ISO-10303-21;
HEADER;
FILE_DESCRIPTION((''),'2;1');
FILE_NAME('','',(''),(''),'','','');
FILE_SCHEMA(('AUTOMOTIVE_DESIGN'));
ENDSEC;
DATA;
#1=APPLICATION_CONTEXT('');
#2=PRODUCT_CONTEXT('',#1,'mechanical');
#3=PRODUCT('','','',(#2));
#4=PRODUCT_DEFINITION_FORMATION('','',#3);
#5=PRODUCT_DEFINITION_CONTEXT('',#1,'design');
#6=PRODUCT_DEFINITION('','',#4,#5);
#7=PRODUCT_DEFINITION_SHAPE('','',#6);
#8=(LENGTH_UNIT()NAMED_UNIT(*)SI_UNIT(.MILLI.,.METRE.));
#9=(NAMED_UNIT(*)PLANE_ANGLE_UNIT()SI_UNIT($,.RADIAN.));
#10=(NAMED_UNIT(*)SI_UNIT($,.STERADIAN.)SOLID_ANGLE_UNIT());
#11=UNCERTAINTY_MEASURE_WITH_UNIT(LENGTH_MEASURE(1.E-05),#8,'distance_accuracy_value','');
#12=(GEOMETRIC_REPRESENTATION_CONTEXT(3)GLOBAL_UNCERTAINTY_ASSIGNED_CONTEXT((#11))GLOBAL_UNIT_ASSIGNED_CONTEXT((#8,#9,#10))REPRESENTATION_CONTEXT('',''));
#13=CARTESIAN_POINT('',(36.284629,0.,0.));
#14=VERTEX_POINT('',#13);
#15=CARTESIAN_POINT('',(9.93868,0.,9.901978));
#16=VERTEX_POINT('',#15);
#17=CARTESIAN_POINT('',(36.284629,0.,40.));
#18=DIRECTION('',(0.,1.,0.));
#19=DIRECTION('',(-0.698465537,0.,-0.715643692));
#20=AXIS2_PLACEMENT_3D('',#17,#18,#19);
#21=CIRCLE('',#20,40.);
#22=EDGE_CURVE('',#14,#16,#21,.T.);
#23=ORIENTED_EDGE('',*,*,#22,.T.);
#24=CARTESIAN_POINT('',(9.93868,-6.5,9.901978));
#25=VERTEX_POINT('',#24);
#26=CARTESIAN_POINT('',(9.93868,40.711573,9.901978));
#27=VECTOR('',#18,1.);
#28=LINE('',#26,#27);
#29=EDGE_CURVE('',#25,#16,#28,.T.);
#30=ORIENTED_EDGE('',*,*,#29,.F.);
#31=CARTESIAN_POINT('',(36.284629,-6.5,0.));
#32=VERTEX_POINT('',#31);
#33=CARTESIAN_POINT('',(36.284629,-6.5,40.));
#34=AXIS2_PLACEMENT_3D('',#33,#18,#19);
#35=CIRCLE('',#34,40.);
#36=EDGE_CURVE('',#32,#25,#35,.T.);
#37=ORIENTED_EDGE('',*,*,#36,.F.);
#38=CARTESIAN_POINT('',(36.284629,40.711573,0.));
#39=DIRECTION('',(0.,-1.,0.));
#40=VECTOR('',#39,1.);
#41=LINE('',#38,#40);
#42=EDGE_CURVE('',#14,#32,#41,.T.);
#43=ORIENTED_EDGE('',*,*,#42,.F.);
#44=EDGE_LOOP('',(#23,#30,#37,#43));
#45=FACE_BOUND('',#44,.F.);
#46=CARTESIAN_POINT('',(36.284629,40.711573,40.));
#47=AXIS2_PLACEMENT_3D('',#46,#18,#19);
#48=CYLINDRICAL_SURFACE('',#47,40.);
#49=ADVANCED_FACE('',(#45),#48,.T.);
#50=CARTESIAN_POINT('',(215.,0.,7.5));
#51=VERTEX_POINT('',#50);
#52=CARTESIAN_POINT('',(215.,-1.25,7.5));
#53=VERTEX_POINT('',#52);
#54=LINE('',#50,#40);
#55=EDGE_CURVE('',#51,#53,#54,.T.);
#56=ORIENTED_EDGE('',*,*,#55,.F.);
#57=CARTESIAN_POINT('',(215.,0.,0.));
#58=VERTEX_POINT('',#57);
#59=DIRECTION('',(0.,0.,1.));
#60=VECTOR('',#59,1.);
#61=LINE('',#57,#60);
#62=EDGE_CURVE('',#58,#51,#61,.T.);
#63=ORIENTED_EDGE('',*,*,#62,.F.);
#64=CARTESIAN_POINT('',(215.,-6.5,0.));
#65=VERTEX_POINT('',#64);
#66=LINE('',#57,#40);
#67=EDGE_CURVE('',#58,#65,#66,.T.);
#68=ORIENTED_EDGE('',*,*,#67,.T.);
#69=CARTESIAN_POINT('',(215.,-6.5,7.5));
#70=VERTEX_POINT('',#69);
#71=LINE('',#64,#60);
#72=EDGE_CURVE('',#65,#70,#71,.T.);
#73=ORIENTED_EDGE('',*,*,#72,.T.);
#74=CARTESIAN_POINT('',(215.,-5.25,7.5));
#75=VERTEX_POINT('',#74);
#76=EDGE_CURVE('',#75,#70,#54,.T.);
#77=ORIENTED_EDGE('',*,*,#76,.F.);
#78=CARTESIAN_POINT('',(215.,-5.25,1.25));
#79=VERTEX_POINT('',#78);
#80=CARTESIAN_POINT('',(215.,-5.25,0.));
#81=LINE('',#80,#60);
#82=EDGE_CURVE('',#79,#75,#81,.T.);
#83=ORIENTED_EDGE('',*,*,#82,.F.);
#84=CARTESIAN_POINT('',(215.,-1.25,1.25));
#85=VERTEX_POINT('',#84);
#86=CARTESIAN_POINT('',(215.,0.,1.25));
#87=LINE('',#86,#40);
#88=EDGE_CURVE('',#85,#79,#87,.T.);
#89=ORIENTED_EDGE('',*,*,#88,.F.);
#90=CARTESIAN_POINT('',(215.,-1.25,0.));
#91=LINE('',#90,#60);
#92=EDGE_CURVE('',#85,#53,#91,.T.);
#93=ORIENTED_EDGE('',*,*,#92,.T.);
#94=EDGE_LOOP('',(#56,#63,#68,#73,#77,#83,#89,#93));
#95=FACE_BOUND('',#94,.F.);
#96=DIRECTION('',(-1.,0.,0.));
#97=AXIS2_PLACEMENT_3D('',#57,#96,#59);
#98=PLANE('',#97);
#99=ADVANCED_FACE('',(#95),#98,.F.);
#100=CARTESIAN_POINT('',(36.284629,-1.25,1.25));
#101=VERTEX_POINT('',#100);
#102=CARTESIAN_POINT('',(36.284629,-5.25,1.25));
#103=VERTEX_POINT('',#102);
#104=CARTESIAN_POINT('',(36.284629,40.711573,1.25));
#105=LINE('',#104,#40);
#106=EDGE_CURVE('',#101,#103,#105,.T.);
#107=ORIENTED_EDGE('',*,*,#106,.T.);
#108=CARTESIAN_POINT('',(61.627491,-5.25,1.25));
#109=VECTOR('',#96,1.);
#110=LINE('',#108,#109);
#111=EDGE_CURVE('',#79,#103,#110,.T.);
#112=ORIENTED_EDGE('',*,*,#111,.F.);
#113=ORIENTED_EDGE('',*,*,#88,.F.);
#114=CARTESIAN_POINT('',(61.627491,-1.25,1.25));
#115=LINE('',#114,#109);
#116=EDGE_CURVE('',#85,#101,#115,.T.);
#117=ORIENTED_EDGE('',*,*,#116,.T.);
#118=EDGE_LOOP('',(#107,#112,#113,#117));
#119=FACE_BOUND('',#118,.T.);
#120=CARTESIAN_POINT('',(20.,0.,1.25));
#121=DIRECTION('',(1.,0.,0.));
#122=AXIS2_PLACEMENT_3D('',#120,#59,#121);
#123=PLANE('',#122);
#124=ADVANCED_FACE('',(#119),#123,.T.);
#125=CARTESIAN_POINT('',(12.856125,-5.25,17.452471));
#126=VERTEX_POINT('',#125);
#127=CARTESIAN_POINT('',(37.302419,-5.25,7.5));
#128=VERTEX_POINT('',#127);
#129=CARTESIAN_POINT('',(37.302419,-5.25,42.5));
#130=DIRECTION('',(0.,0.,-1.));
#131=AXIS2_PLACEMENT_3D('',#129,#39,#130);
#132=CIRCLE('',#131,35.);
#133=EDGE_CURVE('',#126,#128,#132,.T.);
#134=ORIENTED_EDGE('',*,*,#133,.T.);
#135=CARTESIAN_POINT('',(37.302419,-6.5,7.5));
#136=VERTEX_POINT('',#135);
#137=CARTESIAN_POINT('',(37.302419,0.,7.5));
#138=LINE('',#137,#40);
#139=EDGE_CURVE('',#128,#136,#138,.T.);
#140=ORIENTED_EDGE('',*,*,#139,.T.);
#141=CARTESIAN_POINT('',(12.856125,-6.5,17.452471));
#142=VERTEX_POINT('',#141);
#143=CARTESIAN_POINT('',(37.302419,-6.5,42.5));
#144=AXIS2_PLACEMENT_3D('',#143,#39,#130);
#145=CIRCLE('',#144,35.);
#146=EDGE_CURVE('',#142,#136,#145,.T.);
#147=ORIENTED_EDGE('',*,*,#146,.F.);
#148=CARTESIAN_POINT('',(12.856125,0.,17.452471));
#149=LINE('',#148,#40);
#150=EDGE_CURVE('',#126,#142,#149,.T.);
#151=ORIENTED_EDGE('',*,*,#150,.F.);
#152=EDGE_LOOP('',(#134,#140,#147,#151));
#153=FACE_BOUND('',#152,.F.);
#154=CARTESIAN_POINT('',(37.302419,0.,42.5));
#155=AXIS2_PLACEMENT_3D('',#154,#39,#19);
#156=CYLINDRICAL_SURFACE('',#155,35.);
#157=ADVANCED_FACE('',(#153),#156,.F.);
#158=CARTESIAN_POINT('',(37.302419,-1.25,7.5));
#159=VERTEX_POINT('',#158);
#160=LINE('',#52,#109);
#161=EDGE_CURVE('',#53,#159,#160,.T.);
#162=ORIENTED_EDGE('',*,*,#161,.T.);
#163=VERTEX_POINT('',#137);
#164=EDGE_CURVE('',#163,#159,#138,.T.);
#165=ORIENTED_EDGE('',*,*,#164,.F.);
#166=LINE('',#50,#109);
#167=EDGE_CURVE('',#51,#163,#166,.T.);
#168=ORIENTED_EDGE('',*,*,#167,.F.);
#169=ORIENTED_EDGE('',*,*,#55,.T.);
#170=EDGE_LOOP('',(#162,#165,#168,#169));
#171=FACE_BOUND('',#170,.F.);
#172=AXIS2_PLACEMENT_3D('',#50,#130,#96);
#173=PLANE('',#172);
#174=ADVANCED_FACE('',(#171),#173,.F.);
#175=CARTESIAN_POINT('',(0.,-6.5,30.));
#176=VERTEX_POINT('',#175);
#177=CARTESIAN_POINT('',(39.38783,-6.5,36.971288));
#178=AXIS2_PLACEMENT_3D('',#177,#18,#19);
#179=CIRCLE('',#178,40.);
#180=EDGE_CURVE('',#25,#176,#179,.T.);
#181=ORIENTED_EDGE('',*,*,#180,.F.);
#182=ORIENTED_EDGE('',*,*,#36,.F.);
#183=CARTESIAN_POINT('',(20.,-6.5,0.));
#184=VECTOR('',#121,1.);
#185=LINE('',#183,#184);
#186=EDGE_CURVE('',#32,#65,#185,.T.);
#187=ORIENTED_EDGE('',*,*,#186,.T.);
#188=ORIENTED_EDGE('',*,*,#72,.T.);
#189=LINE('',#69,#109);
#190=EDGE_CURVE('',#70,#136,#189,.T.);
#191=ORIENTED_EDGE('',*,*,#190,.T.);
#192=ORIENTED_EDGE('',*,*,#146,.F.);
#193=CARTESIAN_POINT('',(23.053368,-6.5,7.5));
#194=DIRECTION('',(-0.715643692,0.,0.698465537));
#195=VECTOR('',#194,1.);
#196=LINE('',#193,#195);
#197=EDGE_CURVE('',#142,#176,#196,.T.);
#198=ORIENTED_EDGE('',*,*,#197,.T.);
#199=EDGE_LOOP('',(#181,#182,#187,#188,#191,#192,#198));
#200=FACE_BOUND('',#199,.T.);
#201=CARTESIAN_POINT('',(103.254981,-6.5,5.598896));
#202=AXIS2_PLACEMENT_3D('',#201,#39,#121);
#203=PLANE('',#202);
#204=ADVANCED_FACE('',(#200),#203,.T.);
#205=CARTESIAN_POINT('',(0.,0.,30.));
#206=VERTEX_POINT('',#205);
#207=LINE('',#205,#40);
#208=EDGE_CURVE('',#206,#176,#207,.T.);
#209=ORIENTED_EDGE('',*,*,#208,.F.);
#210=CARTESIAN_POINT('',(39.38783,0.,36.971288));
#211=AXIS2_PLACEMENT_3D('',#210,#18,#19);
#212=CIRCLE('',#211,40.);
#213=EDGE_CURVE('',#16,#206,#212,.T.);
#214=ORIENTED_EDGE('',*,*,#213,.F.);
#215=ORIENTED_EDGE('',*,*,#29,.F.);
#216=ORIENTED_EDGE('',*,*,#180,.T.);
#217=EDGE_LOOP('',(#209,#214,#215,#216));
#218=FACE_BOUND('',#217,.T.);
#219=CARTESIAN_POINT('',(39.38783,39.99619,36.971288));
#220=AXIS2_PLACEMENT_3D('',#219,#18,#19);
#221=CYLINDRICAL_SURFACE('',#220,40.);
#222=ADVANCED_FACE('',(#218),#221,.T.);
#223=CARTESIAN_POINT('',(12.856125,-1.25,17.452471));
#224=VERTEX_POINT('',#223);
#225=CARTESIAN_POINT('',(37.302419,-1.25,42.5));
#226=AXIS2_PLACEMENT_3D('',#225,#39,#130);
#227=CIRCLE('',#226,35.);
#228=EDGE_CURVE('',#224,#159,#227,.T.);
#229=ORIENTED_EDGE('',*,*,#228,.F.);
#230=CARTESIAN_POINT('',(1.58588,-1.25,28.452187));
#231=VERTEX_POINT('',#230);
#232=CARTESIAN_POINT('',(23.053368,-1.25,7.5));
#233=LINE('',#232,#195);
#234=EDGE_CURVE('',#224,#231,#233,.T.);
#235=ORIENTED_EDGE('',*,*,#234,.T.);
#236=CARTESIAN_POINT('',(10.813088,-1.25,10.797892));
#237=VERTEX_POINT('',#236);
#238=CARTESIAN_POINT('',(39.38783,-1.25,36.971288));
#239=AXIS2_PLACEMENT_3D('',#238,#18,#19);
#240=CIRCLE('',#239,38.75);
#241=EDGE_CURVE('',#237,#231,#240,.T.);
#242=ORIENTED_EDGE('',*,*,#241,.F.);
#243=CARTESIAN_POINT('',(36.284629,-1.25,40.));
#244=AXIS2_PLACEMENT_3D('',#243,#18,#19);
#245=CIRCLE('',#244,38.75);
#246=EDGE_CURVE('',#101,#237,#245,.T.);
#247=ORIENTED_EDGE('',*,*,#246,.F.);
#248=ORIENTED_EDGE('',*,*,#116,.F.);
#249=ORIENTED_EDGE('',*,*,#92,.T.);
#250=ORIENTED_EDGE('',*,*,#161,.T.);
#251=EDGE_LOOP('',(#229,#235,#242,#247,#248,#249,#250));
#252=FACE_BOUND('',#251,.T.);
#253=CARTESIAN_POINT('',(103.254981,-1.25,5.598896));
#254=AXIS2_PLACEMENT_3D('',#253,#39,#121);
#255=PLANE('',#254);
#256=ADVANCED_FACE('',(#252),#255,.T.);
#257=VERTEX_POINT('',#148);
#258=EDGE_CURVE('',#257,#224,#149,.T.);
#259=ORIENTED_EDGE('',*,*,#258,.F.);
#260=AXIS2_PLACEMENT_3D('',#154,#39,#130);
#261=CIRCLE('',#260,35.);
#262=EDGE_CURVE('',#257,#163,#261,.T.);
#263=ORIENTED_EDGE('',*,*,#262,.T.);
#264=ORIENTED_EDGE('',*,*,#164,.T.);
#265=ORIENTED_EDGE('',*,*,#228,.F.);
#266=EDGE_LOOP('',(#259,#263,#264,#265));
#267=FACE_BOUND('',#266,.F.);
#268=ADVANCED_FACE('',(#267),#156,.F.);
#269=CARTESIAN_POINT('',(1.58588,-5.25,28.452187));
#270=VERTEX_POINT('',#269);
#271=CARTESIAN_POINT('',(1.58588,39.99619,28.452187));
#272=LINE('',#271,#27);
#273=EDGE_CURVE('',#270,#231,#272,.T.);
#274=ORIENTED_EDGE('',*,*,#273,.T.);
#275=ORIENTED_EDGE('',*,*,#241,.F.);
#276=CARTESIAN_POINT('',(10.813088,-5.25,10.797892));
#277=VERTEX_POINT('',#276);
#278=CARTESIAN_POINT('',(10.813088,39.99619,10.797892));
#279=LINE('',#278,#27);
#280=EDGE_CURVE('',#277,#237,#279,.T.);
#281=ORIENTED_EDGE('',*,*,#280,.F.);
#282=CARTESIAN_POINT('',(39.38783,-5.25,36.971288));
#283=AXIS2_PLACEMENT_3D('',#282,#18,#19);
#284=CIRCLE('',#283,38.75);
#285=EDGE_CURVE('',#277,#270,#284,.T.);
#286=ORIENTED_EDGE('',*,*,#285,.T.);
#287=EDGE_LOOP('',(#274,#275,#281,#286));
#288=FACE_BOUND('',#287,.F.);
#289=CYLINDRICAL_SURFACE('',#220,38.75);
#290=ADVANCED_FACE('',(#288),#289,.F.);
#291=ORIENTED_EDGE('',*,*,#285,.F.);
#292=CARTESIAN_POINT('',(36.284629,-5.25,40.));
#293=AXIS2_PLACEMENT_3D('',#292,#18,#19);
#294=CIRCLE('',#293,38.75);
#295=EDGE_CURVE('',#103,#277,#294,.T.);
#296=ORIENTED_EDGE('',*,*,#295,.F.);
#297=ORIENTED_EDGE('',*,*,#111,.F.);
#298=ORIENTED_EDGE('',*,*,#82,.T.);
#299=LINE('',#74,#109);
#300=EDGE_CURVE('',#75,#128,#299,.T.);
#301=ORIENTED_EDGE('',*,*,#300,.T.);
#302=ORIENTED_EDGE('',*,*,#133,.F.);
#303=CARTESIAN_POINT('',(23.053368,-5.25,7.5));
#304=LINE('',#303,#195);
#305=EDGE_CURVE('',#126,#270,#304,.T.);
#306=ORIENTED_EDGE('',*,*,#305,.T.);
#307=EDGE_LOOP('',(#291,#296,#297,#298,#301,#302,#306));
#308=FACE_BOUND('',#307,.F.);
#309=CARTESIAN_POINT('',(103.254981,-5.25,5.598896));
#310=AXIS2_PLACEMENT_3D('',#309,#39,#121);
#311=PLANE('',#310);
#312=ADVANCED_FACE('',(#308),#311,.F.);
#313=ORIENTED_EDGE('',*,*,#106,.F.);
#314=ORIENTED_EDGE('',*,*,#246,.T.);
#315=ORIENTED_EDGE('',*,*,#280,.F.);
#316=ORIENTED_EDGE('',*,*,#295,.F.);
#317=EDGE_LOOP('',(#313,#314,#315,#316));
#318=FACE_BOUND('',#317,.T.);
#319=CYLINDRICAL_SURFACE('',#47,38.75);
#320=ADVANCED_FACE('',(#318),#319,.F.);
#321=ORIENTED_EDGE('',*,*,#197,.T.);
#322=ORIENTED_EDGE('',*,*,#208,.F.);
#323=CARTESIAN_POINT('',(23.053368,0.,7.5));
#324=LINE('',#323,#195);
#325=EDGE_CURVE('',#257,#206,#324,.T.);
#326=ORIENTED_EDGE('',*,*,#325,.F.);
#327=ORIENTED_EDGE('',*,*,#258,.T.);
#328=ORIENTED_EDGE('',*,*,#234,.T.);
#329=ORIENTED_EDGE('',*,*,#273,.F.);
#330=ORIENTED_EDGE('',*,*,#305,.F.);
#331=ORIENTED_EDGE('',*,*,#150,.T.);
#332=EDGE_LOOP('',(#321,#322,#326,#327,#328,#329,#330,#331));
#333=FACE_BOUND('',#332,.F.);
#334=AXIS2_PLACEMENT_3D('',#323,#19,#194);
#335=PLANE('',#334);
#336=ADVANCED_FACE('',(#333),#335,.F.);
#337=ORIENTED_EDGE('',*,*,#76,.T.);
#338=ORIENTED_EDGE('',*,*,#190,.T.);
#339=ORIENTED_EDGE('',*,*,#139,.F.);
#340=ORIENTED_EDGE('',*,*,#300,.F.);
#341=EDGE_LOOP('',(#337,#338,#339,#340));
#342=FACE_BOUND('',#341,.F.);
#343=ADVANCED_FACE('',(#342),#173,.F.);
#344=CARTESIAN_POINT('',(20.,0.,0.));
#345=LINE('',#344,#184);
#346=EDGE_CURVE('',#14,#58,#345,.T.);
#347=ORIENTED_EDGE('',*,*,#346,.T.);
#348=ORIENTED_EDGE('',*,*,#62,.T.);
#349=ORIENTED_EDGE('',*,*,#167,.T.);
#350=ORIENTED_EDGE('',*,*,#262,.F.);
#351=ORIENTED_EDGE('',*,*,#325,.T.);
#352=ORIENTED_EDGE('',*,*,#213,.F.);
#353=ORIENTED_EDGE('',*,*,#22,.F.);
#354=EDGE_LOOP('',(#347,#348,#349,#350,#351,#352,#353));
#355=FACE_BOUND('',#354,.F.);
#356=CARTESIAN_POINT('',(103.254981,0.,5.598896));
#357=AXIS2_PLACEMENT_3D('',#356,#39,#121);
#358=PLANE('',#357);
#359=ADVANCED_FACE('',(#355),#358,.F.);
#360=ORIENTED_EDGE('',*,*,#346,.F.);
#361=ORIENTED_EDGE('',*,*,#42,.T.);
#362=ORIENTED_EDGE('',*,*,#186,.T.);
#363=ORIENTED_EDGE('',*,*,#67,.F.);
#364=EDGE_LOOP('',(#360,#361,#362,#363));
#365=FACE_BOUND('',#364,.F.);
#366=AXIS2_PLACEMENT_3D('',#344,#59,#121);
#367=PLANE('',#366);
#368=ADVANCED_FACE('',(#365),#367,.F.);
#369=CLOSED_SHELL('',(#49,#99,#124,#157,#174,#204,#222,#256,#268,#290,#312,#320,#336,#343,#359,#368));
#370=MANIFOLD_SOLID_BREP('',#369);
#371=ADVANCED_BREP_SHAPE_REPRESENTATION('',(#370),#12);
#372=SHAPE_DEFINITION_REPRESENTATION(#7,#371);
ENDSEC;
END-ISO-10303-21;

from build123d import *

# Parameters (mm, degrees)
F3_DEPTH    = 6.5
F4_T1_DEPTH = 87.9231463955
F4_T3_DEPTH = 86.4923799402
F5_R        = 35
F6_T        = -1.25


# Not quite as in the source:
# - a fillet or chamfer that OpenCascade refuses, or shapes differently, is made with other operations: its cross-section is extruded or revolved along the edge and cut away or added


with BuildPart() as f3:
    # F2 (on Front) → F3 (new body)
    with BuildSketch(Plane.XZ):
        Polygon((0, 19.5199243858), (20, 0), (215, 0), (215, 7.5), (23.0533679898, 7.5), (0, 30), align=None)
    extrude(amount=F3_DEPTH)

    # F4: fillet of radius 40 on 2 edges, made by hand

    # F4_s2 → F4_t1 (cut)
    with BuildSketch(Plane.XZ.offset(-40.7115731978)):
        with BuildLine():
            ThreePointArc((8.3460077876, 11.374252339), (21.2020218527, 2.9525310821), (36.2846292791, 0))
            Line((36.2846292791, 0), (20, 0))
            Line((20, 0), (8.3460077876, 11.374252339))
        make_face()
    extrude(amount=F4_T1_DEPTH, mode=Mode.SUBTRACT)

    # F4_s4 → F4_t3 (cut)
    with BuildSketch(Plane.XZ.offset(-39.9961899701)):
        with BuildLine():
            ThreePointArc((11.4492084149, 8.345540259), (4.0262452257, 18.2748088699), (0, 30))
            Line((0, 30), (0, 19.5199243858))
            Line((0, 19.5199243858), (11.4492084149, 8.345540259))
        make_face()
    extrude(amount=F4_T3_DEPTH, mode=Mode.SUBTRACT)

    # F5
    f5_edges = [f3.edges().sort_by_distance(p)[0] for p in [
        (23.053368, -3.25, 7.5),
    ]]
    fillet(f5_edges, radius=F5_R)

    # F6
    f6_openings = [f3.faces().sort_by_distance(p)[0] for p in [
        (6.428062, -3.25, 23.726235),
        (24.105137, -3.25, 10.083465),
        (126.151209, -3.25, 7.5),
        (215, -3.25, 3.75),
    ]]
    offset(amount=F6_T, openings=f6_openings)


solid = f3.part
